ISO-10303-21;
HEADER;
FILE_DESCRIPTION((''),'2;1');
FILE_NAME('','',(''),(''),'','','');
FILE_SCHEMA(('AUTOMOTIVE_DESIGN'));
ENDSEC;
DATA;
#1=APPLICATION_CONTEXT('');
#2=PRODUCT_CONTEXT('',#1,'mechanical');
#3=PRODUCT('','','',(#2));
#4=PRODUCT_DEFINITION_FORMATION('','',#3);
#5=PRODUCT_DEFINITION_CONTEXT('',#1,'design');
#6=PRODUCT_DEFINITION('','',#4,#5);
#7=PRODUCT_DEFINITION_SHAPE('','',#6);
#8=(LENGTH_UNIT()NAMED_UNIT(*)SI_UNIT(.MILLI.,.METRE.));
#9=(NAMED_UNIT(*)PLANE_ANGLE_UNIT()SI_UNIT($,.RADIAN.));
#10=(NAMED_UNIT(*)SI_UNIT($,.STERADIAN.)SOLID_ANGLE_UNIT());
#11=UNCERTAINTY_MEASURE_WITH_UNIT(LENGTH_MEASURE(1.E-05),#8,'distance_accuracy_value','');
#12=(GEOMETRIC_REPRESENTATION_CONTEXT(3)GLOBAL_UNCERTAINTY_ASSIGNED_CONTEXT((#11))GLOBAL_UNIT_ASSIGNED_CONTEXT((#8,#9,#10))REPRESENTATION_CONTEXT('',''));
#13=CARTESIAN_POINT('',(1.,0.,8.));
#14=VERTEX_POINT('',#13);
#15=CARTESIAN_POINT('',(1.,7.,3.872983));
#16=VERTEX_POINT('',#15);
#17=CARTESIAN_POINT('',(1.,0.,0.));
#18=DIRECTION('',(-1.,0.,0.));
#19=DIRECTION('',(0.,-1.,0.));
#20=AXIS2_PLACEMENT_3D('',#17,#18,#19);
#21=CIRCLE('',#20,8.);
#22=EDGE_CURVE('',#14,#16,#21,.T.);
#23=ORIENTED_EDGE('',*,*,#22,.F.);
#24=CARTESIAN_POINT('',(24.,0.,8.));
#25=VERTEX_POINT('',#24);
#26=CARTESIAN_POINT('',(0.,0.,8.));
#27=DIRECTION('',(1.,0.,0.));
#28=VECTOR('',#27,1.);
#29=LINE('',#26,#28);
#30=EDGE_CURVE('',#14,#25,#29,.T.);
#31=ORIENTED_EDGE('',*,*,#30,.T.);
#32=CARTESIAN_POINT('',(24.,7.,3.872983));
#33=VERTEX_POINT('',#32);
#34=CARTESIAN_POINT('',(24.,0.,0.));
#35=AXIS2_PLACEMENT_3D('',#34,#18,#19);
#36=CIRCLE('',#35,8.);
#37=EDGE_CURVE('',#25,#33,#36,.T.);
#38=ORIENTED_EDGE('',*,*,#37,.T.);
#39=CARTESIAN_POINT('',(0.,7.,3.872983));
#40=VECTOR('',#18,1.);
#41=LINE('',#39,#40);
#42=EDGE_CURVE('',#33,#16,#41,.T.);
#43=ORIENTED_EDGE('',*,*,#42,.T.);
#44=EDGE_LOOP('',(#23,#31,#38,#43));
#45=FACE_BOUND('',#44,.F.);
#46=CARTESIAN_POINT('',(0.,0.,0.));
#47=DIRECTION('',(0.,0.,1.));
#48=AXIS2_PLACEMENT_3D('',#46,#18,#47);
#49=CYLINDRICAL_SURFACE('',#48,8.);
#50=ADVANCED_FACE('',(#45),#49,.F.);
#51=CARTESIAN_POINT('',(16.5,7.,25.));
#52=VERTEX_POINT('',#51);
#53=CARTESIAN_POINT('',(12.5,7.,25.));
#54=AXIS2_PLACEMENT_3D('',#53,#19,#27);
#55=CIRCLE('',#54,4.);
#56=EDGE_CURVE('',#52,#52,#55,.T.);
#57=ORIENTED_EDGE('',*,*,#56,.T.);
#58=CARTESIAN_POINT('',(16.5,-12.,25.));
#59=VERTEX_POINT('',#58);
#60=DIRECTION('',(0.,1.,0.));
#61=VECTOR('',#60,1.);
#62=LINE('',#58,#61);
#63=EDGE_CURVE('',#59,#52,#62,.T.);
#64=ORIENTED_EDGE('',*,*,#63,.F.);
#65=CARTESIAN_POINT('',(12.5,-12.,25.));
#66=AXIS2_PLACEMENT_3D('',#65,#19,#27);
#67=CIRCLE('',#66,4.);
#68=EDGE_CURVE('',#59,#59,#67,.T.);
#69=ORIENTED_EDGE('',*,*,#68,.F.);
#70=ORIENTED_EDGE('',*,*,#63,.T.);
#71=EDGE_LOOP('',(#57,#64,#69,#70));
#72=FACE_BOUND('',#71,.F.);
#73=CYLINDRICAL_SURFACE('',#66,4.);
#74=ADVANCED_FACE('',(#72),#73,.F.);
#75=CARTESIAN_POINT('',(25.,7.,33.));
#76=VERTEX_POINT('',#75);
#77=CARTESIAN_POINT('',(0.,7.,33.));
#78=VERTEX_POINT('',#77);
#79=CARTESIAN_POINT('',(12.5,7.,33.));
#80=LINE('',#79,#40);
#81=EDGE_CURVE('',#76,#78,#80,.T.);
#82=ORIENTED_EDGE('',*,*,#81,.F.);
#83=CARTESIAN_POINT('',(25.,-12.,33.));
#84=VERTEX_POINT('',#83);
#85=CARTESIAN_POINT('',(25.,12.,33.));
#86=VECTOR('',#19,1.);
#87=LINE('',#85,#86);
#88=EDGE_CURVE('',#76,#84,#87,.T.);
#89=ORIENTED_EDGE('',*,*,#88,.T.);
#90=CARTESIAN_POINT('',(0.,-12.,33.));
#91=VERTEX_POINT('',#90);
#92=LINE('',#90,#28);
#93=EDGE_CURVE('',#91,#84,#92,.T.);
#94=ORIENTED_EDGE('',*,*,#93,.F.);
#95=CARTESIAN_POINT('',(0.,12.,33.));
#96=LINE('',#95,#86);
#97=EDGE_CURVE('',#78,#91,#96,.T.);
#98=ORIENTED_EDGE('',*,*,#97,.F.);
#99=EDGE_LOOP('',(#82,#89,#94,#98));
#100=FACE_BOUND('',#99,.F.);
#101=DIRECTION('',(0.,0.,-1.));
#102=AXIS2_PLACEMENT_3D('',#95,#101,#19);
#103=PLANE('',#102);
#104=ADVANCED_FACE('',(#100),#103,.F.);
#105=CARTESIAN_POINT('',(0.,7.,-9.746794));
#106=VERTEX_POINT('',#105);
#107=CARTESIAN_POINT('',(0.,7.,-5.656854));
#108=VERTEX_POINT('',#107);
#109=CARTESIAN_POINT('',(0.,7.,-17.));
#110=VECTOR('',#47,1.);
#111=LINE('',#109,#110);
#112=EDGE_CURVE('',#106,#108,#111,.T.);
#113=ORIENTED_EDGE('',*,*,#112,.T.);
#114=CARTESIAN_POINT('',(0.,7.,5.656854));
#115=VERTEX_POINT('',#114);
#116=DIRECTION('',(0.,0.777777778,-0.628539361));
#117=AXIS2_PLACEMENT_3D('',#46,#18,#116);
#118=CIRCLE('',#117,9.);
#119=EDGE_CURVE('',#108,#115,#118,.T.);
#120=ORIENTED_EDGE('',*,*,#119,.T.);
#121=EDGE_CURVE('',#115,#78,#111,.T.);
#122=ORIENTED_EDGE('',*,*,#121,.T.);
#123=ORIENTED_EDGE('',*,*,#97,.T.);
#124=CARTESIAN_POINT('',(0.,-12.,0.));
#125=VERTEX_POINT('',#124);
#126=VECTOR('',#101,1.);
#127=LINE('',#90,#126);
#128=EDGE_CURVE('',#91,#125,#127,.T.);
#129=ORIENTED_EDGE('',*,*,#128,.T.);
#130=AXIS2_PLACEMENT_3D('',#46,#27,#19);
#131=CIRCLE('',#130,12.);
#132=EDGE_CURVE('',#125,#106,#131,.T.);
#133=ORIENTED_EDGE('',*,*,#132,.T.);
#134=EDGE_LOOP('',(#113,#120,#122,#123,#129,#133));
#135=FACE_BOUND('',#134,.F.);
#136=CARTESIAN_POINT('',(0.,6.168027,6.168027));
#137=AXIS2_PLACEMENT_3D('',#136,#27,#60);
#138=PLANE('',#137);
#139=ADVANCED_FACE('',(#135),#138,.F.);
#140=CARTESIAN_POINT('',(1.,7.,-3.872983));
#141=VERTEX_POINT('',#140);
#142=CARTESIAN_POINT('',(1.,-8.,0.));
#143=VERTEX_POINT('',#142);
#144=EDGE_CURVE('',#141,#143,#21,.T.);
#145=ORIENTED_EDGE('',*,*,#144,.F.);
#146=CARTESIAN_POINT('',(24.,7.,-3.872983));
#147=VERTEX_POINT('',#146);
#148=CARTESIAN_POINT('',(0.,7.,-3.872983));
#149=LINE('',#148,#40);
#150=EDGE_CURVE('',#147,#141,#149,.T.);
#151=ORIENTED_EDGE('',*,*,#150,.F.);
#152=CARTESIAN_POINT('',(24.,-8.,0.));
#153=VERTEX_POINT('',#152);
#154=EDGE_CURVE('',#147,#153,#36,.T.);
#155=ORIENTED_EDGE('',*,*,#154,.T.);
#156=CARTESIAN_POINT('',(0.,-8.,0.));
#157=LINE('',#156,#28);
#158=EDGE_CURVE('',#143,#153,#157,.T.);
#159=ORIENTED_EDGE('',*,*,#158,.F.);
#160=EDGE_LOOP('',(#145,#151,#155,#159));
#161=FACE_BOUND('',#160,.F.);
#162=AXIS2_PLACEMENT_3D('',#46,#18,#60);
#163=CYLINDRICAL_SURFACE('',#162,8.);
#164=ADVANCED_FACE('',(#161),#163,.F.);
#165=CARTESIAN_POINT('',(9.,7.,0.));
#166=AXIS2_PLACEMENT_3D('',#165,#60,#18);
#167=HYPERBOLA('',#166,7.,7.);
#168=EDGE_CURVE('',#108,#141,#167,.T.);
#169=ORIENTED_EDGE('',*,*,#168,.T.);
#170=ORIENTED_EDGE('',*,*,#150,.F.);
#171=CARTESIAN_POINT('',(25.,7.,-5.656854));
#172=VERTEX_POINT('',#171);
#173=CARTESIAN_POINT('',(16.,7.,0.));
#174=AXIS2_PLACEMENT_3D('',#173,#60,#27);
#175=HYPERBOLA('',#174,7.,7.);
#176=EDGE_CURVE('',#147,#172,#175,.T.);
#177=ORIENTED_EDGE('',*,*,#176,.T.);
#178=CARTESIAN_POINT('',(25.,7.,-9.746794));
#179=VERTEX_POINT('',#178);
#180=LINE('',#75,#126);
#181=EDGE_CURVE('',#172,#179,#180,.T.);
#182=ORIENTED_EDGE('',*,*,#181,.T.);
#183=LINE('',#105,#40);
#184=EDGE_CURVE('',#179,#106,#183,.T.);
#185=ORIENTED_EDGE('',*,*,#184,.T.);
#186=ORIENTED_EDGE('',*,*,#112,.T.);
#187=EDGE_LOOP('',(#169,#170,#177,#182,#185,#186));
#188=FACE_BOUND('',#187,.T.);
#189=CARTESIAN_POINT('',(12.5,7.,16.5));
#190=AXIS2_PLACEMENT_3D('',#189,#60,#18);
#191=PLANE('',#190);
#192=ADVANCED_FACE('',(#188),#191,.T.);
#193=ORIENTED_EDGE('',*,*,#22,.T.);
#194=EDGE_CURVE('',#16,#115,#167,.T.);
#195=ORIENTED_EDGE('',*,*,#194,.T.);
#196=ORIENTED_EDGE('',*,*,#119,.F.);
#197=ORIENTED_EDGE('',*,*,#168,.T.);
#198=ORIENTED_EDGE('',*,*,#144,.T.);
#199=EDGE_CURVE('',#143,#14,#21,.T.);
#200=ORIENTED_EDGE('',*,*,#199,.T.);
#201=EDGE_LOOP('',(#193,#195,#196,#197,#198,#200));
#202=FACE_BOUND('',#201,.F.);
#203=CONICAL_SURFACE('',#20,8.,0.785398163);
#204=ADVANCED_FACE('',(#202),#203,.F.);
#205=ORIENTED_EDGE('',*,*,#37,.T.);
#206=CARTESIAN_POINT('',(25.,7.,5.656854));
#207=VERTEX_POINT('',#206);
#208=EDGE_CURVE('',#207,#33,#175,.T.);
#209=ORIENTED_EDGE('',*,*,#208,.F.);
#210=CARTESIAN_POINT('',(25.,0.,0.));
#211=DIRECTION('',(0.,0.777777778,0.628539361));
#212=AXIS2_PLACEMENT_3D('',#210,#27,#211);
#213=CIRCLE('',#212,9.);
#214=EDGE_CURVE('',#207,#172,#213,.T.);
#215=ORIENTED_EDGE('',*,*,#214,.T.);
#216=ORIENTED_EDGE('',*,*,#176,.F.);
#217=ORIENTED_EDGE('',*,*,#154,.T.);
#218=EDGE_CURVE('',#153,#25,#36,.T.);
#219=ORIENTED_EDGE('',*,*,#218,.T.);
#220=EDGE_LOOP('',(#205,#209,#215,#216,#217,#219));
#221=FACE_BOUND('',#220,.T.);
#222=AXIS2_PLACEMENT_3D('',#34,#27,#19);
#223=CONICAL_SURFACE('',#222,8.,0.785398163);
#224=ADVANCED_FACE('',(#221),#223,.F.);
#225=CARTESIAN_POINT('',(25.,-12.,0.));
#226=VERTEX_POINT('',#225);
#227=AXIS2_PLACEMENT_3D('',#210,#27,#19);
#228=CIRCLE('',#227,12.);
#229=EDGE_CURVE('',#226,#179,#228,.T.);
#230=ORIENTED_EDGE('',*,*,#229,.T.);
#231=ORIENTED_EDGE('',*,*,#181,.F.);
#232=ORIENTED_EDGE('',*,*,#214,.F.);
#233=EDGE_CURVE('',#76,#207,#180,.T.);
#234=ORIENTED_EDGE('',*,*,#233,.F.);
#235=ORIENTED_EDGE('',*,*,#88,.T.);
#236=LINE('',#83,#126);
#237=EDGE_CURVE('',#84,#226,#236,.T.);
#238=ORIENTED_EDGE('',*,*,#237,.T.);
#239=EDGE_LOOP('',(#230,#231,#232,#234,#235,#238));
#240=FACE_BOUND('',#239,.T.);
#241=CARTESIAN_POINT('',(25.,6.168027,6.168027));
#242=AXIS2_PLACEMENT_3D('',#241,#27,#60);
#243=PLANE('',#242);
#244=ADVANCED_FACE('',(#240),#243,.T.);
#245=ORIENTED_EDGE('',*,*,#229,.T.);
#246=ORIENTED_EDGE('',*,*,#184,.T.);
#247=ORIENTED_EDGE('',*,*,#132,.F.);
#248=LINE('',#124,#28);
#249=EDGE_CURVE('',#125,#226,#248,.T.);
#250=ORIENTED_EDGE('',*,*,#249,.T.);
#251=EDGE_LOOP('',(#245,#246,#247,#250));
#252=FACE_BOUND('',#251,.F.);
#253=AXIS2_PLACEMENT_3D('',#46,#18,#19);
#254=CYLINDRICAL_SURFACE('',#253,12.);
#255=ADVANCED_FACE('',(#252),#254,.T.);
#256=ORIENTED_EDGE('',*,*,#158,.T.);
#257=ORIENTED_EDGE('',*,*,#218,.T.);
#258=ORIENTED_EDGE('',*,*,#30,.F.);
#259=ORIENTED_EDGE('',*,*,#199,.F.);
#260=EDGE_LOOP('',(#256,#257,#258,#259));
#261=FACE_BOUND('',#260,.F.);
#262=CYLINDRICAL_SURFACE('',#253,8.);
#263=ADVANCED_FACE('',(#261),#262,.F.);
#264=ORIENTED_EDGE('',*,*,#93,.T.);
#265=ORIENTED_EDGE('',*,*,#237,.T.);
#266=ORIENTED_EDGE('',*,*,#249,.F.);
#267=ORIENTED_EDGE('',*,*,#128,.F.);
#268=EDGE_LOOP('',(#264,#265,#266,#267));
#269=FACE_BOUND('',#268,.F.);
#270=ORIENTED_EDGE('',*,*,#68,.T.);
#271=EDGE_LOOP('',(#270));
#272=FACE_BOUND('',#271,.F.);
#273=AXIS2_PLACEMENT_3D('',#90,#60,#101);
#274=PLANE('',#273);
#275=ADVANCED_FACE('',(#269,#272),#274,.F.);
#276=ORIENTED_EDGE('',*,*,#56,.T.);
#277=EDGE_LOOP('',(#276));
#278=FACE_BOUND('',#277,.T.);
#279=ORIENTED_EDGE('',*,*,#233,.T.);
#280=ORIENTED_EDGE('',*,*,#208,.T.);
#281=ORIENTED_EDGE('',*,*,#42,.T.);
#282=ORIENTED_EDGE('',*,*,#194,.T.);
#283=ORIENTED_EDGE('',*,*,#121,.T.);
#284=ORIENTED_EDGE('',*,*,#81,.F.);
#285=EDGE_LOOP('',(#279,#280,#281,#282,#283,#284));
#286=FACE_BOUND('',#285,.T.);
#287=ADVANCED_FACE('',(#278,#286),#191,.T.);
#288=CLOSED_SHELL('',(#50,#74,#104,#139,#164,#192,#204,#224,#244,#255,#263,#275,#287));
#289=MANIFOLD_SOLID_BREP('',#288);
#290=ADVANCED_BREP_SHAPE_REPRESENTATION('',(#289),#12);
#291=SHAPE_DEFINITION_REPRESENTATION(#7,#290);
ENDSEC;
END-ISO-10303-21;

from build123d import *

# Parameters (mm, degrees)
F1_DEPTH = 25
F3_W     = 25
F3_H     = 33
F3_H_2   = 17
F4_DEPTH = 5
F6_DEPTH = 25


# Not quite as in the source:
# - a fillet or chamfer that OpenCascade refuses, or shapes differently, is made with other operations: its cross-section is extruded or revolved along the edge and cut away or added


with BuildPart() as f1:
    # F0 (on Right) → F1 (new body)
    with BuildSketch(Plane.YZ):
        with BuildLine():
            ThreePointArc((0, 8), (5.6568542495, 5.6568542495), (8, 0))
            Line((8, 0), (12, 0))
            ThreePointArc((12, 0), (8.4852813742, 8.4852813742), (0, 12))
            Line((0, 12), (0, 8))
        make_face()
        with BuildLine():
            Line((12, 0), (8, 0))
            ThreePointArc((8, 0), (0, -8), (-8, 0))
            Line((-8, 0), (-12, 0))
            ThreePointArc((-12, 0), (0, -12), (12, 0))
        make_face()
        with BuildLine():
            ThreePointArc((-8, 0), (-5.6568542495, 5.6568542495), (0, 8))
            Line((0, 8), (0, 12))
            ThreePointArc((0, 12), (-8.4852813742, 8.4852813742), (-12, 0))
            Line((-12, 0), (-8, 0))
        make_face()
        with BuildLine():
            ThreePointArc((-12, 0), (-8.4852813742, 8.4852813742), (0, 12))
            Line((0, 12), (0, 25))
            Line((0, 25), (0, 29))
            Line((0, 29), (0, 33))
            Line((0, 33), (-12, 33))
            Line((-12, 33), (-12, 0))
        make_face()
        with BuildLine():
            ThreePointArc((0, 12), (8.4852813742, 8.4852813742), (12, 0))
            Line((12, 0), (12, 33))
            Line((12, 33), (0, 33))
            Line((0, 33), (0, 29))
            Line((0, 29), (0, 25))
            Line((0, 25), (0, 12))
        make_face()
    extrude(amount=F1_DEPTH)

    # F2: chamfer of 1 on 2 edges, made by hand

    # F2_s1 → F2_t2 (revolve, cut)
    with BuildSketch(Plane.XY):
        Polygon((24, -8), (25, -9), (25, -8), align=None)
    revolve(axis=Axis((25, 0, 0), (-1, 0, 0)), mode=Mode.SUBTRACT)

    # F2_s3 → F2_t4 (revolve, cut)
    with BuildSketch(Plane.XY):
        Polygon((1, -8), (0, -9), (0, -8), align=None)
    revolve(axis=Axis((0, 0, 0), (-1, 0, 0)), mode=Mode.SUBTRACT)

    # F3 (on face) → F4 (cut)
    with BuildSketch(Plane(origin=(0, 12, 0), x_dir=(-1, 0, 0), z_dir=(0, 1, 0))):
        with Locations((-12.5, 16.5)):
            Rectangle(F3_W, F3_H)
        with Locations((-12.5, -8.5)):
            Rectangle(F3_W, F3_H_2)
    extrude(amount=-F4_DEPTH, mode=Mode.SUBTRACT)

    # F5 (on face) → F6 (cut)
    with BuildSketch(Plane.XZ.offset(12)):
        with BuildLine():
            Line((12.5, 25), (8.5, 25))
            ThreePointArc((8.5, 25), (12.5, 21), (16.5, 25))
            Line((16.5, 25), (12.5, 25))
        make_face()
        with BuildLine():
            ThreePointArc((16.5, 25), (12.5, 29), (8.5, 25))
            Line((8.5, 25), (12.5, 25))
            Line((12.5, 25), (16.5, 25))
        make_face()
    extrude(amount=-F6_DEPTH, mode=Mode.SUBTRACT)


solid = f1.part
